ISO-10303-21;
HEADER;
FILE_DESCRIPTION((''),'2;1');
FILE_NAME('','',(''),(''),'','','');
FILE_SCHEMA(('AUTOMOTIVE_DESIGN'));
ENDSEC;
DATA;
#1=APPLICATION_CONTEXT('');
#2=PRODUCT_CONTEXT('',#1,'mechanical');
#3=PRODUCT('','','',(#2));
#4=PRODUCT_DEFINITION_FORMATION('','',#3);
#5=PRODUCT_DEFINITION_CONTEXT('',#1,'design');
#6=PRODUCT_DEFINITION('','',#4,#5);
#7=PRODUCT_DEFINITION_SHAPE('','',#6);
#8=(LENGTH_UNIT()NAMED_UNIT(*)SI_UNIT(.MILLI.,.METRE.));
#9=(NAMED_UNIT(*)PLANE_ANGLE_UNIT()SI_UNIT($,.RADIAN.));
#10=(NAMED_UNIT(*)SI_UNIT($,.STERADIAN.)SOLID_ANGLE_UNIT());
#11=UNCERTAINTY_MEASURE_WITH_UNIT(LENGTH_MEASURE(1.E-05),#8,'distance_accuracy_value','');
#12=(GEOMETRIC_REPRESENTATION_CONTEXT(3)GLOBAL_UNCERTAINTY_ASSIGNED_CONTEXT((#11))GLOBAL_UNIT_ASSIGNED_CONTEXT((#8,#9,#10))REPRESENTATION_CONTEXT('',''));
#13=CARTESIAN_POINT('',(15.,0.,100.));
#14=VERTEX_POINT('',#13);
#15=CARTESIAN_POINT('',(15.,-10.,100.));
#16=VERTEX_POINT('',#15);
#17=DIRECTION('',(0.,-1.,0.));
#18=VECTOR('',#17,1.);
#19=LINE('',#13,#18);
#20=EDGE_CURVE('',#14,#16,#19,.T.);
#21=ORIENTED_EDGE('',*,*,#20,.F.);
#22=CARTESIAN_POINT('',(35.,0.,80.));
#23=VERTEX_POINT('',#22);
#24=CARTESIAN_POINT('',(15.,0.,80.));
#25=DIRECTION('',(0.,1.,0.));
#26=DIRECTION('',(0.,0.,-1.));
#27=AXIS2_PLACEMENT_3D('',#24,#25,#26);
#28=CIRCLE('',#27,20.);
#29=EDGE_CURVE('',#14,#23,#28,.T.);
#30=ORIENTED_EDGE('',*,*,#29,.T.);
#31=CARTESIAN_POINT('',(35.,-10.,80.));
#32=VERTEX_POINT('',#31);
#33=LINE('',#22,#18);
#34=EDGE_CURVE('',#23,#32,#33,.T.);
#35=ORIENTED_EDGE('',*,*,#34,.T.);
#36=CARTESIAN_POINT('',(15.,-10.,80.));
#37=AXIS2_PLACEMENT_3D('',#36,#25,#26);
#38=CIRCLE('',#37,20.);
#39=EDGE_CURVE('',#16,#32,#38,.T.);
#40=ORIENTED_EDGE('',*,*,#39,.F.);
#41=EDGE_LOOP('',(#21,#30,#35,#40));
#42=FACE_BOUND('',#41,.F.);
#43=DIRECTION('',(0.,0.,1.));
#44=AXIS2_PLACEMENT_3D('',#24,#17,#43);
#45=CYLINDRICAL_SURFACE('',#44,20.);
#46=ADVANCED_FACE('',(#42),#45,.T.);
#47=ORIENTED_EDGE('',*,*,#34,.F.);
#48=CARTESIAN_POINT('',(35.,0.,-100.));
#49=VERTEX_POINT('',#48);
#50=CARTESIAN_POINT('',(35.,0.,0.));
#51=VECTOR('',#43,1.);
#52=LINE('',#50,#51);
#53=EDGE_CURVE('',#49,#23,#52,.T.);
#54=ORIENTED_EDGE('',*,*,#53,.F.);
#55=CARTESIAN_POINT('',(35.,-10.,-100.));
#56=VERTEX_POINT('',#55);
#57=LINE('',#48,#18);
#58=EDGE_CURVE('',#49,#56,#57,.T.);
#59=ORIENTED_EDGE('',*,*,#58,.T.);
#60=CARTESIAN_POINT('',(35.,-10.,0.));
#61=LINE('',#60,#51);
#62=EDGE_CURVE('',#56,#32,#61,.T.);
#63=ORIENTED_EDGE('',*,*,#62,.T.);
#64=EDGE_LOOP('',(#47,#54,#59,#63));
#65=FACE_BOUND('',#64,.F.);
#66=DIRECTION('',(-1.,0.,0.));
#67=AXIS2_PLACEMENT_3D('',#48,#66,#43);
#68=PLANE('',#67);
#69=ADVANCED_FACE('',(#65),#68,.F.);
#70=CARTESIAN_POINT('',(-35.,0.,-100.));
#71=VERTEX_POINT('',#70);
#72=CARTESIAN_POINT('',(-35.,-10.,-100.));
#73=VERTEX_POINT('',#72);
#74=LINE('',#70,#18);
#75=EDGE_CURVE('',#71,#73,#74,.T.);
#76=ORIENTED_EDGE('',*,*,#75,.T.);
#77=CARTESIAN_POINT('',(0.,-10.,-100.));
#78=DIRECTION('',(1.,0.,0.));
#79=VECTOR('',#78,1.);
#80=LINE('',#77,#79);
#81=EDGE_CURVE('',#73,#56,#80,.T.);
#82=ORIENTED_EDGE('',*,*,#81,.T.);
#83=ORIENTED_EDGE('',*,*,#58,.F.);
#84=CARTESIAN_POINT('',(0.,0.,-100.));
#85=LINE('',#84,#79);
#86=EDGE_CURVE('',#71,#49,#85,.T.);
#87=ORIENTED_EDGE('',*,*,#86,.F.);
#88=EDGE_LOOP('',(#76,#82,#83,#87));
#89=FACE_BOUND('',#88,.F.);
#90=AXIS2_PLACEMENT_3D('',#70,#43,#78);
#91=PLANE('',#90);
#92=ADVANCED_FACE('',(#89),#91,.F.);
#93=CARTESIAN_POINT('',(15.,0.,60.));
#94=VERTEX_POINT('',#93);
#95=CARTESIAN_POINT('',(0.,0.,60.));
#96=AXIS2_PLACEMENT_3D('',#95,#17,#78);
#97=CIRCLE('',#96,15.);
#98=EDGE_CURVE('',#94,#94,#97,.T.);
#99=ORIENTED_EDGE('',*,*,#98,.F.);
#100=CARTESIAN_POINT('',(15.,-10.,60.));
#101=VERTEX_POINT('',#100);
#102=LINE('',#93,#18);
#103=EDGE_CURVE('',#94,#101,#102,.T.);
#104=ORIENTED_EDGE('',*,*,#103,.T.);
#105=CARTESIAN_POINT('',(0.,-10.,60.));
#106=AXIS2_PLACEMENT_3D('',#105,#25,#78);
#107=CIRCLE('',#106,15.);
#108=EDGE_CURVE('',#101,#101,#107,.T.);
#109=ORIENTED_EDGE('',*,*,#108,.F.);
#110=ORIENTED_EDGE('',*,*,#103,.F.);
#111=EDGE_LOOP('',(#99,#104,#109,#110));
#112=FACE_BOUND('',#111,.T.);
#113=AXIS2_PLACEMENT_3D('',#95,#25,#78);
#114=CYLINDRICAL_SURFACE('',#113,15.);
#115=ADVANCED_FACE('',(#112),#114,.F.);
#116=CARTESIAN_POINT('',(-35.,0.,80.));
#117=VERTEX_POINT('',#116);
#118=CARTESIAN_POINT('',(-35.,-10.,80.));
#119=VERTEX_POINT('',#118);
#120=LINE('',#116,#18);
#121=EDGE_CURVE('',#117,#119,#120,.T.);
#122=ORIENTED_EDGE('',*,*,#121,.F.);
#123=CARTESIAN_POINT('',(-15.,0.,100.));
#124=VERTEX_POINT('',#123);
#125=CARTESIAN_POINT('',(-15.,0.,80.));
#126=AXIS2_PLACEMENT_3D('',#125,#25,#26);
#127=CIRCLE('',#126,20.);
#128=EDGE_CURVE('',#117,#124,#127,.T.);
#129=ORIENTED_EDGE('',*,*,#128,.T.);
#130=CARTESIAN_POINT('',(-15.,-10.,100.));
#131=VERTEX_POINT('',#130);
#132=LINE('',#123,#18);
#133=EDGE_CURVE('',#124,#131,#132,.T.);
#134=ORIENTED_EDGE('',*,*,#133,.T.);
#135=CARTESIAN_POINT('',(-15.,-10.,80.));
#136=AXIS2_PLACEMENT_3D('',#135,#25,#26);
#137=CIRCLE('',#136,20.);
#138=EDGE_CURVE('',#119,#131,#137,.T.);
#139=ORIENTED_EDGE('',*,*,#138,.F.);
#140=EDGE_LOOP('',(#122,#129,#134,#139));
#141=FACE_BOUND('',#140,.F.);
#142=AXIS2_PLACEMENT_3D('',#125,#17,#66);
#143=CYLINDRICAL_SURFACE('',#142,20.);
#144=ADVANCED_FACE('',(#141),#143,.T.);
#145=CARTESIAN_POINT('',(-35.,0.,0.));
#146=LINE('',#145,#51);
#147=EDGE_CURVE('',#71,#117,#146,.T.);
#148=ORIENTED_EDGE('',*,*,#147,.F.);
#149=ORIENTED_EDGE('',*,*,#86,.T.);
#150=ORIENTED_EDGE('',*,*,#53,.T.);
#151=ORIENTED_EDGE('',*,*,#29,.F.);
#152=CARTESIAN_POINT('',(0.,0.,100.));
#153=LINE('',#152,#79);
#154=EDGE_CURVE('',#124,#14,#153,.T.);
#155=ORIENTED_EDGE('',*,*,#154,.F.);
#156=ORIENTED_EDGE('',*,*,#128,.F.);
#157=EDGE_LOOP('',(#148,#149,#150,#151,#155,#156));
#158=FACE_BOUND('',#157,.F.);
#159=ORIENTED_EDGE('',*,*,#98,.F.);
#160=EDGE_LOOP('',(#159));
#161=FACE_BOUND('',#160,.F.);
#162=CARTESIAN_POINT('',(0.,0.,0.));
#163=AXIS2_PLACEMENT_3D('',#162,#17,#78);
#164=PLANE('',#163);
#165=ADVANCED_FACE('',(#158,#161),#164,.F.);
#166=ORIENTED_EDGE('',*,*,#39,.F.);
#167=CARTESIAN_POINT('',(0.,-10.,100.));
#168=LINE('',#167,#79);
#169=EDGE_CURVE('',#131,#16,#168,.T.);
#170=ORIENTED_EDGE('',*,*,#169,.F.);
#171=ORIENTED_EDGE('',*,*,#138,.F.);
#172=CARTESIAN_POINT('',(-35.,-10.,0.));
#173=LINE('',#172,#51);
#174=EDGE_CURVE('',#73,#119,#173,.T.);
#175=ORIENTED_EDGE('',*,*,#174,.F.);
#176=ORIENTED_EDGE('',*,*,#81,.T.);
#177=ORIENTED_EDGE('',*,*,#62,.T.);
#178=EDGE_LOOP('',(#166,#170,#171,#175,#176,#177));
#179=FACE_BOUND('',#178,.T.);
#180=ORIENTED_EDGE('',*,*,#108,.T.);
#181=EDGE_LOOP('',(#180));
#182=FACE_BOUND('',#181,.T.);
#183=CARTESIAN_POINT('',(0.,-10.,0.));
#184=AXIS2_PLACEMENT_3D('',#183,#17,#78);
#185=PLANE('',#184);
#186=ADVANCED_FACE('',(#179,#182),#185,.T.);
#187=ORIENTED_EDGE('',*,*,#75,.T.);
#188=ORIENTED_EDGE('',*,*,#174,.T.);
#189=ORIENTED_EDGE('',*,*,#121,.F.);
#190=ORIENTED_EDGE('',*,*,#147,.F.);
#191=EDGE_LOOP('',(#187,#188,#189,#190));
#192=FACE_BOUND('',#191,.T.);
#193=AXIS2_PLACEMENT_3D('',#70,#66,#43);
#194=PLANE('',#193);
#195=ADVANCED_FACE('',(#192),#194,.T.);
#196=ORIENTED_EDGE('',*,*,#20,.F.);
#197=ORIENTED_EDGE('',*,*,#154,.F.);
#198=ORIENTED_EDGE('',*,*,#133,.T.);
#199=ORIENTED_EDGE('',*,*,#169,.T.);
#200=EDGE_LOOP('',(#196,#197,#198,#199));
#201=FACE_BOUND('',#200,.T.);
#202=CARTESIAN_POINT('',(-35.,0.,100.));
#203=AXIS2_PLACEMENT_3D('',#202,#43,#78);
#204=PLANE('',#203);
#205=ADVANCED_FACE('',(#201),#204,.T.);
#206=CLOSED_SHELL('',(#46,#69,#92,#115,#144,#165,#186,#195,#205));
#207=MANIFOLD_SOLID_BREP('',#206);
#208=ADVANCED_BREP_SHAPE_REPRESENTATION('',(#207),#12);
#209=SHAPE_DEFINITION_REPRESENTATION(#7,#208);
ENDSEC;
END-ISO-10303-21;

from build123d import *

# Parameters (mm, degrees)
F0_W          = 70
F0_H          = 200
F1_DEPTH      = 10
F2_R          = 15
F3_DEPTH      = 218
F3_DEPTH_BACK = 25
F4_R          = 20


# Not quite as in the source:
# - an extrude ends at something that could not be found from the text; its depth is read off the source's solid


with BuildPart() as f1:
    # F0 (on Front) → F1 (new body)
    with BuildSketch(Plane.XZ):
        Rectangle(F0_W, F0_H)
    extrude(amount=F1_DEPTH)

    # F2 (on Front) → F3 (cut, two sides)
    with BuildSketch(Plane.XZ) as f3_sk:
        with Locations((0, 60)):
            Circle(F2_R)
    extrude(amount=-F3_DEPTH, mode=Mode.SUBTRACT)
    extrude(f3_sk.sketch, amount=F3_DEPTH_BACK, mode=Mode.SUBTRACT)

    # F4
    f4_edges = [f1.edges().sort_by_distance(p)[0] for p in [
        (-35, -5, 100),
        (35, -5, 100),
    ]]
    fillet(f4_edges, radius=F4_R)


solid = f1.part
